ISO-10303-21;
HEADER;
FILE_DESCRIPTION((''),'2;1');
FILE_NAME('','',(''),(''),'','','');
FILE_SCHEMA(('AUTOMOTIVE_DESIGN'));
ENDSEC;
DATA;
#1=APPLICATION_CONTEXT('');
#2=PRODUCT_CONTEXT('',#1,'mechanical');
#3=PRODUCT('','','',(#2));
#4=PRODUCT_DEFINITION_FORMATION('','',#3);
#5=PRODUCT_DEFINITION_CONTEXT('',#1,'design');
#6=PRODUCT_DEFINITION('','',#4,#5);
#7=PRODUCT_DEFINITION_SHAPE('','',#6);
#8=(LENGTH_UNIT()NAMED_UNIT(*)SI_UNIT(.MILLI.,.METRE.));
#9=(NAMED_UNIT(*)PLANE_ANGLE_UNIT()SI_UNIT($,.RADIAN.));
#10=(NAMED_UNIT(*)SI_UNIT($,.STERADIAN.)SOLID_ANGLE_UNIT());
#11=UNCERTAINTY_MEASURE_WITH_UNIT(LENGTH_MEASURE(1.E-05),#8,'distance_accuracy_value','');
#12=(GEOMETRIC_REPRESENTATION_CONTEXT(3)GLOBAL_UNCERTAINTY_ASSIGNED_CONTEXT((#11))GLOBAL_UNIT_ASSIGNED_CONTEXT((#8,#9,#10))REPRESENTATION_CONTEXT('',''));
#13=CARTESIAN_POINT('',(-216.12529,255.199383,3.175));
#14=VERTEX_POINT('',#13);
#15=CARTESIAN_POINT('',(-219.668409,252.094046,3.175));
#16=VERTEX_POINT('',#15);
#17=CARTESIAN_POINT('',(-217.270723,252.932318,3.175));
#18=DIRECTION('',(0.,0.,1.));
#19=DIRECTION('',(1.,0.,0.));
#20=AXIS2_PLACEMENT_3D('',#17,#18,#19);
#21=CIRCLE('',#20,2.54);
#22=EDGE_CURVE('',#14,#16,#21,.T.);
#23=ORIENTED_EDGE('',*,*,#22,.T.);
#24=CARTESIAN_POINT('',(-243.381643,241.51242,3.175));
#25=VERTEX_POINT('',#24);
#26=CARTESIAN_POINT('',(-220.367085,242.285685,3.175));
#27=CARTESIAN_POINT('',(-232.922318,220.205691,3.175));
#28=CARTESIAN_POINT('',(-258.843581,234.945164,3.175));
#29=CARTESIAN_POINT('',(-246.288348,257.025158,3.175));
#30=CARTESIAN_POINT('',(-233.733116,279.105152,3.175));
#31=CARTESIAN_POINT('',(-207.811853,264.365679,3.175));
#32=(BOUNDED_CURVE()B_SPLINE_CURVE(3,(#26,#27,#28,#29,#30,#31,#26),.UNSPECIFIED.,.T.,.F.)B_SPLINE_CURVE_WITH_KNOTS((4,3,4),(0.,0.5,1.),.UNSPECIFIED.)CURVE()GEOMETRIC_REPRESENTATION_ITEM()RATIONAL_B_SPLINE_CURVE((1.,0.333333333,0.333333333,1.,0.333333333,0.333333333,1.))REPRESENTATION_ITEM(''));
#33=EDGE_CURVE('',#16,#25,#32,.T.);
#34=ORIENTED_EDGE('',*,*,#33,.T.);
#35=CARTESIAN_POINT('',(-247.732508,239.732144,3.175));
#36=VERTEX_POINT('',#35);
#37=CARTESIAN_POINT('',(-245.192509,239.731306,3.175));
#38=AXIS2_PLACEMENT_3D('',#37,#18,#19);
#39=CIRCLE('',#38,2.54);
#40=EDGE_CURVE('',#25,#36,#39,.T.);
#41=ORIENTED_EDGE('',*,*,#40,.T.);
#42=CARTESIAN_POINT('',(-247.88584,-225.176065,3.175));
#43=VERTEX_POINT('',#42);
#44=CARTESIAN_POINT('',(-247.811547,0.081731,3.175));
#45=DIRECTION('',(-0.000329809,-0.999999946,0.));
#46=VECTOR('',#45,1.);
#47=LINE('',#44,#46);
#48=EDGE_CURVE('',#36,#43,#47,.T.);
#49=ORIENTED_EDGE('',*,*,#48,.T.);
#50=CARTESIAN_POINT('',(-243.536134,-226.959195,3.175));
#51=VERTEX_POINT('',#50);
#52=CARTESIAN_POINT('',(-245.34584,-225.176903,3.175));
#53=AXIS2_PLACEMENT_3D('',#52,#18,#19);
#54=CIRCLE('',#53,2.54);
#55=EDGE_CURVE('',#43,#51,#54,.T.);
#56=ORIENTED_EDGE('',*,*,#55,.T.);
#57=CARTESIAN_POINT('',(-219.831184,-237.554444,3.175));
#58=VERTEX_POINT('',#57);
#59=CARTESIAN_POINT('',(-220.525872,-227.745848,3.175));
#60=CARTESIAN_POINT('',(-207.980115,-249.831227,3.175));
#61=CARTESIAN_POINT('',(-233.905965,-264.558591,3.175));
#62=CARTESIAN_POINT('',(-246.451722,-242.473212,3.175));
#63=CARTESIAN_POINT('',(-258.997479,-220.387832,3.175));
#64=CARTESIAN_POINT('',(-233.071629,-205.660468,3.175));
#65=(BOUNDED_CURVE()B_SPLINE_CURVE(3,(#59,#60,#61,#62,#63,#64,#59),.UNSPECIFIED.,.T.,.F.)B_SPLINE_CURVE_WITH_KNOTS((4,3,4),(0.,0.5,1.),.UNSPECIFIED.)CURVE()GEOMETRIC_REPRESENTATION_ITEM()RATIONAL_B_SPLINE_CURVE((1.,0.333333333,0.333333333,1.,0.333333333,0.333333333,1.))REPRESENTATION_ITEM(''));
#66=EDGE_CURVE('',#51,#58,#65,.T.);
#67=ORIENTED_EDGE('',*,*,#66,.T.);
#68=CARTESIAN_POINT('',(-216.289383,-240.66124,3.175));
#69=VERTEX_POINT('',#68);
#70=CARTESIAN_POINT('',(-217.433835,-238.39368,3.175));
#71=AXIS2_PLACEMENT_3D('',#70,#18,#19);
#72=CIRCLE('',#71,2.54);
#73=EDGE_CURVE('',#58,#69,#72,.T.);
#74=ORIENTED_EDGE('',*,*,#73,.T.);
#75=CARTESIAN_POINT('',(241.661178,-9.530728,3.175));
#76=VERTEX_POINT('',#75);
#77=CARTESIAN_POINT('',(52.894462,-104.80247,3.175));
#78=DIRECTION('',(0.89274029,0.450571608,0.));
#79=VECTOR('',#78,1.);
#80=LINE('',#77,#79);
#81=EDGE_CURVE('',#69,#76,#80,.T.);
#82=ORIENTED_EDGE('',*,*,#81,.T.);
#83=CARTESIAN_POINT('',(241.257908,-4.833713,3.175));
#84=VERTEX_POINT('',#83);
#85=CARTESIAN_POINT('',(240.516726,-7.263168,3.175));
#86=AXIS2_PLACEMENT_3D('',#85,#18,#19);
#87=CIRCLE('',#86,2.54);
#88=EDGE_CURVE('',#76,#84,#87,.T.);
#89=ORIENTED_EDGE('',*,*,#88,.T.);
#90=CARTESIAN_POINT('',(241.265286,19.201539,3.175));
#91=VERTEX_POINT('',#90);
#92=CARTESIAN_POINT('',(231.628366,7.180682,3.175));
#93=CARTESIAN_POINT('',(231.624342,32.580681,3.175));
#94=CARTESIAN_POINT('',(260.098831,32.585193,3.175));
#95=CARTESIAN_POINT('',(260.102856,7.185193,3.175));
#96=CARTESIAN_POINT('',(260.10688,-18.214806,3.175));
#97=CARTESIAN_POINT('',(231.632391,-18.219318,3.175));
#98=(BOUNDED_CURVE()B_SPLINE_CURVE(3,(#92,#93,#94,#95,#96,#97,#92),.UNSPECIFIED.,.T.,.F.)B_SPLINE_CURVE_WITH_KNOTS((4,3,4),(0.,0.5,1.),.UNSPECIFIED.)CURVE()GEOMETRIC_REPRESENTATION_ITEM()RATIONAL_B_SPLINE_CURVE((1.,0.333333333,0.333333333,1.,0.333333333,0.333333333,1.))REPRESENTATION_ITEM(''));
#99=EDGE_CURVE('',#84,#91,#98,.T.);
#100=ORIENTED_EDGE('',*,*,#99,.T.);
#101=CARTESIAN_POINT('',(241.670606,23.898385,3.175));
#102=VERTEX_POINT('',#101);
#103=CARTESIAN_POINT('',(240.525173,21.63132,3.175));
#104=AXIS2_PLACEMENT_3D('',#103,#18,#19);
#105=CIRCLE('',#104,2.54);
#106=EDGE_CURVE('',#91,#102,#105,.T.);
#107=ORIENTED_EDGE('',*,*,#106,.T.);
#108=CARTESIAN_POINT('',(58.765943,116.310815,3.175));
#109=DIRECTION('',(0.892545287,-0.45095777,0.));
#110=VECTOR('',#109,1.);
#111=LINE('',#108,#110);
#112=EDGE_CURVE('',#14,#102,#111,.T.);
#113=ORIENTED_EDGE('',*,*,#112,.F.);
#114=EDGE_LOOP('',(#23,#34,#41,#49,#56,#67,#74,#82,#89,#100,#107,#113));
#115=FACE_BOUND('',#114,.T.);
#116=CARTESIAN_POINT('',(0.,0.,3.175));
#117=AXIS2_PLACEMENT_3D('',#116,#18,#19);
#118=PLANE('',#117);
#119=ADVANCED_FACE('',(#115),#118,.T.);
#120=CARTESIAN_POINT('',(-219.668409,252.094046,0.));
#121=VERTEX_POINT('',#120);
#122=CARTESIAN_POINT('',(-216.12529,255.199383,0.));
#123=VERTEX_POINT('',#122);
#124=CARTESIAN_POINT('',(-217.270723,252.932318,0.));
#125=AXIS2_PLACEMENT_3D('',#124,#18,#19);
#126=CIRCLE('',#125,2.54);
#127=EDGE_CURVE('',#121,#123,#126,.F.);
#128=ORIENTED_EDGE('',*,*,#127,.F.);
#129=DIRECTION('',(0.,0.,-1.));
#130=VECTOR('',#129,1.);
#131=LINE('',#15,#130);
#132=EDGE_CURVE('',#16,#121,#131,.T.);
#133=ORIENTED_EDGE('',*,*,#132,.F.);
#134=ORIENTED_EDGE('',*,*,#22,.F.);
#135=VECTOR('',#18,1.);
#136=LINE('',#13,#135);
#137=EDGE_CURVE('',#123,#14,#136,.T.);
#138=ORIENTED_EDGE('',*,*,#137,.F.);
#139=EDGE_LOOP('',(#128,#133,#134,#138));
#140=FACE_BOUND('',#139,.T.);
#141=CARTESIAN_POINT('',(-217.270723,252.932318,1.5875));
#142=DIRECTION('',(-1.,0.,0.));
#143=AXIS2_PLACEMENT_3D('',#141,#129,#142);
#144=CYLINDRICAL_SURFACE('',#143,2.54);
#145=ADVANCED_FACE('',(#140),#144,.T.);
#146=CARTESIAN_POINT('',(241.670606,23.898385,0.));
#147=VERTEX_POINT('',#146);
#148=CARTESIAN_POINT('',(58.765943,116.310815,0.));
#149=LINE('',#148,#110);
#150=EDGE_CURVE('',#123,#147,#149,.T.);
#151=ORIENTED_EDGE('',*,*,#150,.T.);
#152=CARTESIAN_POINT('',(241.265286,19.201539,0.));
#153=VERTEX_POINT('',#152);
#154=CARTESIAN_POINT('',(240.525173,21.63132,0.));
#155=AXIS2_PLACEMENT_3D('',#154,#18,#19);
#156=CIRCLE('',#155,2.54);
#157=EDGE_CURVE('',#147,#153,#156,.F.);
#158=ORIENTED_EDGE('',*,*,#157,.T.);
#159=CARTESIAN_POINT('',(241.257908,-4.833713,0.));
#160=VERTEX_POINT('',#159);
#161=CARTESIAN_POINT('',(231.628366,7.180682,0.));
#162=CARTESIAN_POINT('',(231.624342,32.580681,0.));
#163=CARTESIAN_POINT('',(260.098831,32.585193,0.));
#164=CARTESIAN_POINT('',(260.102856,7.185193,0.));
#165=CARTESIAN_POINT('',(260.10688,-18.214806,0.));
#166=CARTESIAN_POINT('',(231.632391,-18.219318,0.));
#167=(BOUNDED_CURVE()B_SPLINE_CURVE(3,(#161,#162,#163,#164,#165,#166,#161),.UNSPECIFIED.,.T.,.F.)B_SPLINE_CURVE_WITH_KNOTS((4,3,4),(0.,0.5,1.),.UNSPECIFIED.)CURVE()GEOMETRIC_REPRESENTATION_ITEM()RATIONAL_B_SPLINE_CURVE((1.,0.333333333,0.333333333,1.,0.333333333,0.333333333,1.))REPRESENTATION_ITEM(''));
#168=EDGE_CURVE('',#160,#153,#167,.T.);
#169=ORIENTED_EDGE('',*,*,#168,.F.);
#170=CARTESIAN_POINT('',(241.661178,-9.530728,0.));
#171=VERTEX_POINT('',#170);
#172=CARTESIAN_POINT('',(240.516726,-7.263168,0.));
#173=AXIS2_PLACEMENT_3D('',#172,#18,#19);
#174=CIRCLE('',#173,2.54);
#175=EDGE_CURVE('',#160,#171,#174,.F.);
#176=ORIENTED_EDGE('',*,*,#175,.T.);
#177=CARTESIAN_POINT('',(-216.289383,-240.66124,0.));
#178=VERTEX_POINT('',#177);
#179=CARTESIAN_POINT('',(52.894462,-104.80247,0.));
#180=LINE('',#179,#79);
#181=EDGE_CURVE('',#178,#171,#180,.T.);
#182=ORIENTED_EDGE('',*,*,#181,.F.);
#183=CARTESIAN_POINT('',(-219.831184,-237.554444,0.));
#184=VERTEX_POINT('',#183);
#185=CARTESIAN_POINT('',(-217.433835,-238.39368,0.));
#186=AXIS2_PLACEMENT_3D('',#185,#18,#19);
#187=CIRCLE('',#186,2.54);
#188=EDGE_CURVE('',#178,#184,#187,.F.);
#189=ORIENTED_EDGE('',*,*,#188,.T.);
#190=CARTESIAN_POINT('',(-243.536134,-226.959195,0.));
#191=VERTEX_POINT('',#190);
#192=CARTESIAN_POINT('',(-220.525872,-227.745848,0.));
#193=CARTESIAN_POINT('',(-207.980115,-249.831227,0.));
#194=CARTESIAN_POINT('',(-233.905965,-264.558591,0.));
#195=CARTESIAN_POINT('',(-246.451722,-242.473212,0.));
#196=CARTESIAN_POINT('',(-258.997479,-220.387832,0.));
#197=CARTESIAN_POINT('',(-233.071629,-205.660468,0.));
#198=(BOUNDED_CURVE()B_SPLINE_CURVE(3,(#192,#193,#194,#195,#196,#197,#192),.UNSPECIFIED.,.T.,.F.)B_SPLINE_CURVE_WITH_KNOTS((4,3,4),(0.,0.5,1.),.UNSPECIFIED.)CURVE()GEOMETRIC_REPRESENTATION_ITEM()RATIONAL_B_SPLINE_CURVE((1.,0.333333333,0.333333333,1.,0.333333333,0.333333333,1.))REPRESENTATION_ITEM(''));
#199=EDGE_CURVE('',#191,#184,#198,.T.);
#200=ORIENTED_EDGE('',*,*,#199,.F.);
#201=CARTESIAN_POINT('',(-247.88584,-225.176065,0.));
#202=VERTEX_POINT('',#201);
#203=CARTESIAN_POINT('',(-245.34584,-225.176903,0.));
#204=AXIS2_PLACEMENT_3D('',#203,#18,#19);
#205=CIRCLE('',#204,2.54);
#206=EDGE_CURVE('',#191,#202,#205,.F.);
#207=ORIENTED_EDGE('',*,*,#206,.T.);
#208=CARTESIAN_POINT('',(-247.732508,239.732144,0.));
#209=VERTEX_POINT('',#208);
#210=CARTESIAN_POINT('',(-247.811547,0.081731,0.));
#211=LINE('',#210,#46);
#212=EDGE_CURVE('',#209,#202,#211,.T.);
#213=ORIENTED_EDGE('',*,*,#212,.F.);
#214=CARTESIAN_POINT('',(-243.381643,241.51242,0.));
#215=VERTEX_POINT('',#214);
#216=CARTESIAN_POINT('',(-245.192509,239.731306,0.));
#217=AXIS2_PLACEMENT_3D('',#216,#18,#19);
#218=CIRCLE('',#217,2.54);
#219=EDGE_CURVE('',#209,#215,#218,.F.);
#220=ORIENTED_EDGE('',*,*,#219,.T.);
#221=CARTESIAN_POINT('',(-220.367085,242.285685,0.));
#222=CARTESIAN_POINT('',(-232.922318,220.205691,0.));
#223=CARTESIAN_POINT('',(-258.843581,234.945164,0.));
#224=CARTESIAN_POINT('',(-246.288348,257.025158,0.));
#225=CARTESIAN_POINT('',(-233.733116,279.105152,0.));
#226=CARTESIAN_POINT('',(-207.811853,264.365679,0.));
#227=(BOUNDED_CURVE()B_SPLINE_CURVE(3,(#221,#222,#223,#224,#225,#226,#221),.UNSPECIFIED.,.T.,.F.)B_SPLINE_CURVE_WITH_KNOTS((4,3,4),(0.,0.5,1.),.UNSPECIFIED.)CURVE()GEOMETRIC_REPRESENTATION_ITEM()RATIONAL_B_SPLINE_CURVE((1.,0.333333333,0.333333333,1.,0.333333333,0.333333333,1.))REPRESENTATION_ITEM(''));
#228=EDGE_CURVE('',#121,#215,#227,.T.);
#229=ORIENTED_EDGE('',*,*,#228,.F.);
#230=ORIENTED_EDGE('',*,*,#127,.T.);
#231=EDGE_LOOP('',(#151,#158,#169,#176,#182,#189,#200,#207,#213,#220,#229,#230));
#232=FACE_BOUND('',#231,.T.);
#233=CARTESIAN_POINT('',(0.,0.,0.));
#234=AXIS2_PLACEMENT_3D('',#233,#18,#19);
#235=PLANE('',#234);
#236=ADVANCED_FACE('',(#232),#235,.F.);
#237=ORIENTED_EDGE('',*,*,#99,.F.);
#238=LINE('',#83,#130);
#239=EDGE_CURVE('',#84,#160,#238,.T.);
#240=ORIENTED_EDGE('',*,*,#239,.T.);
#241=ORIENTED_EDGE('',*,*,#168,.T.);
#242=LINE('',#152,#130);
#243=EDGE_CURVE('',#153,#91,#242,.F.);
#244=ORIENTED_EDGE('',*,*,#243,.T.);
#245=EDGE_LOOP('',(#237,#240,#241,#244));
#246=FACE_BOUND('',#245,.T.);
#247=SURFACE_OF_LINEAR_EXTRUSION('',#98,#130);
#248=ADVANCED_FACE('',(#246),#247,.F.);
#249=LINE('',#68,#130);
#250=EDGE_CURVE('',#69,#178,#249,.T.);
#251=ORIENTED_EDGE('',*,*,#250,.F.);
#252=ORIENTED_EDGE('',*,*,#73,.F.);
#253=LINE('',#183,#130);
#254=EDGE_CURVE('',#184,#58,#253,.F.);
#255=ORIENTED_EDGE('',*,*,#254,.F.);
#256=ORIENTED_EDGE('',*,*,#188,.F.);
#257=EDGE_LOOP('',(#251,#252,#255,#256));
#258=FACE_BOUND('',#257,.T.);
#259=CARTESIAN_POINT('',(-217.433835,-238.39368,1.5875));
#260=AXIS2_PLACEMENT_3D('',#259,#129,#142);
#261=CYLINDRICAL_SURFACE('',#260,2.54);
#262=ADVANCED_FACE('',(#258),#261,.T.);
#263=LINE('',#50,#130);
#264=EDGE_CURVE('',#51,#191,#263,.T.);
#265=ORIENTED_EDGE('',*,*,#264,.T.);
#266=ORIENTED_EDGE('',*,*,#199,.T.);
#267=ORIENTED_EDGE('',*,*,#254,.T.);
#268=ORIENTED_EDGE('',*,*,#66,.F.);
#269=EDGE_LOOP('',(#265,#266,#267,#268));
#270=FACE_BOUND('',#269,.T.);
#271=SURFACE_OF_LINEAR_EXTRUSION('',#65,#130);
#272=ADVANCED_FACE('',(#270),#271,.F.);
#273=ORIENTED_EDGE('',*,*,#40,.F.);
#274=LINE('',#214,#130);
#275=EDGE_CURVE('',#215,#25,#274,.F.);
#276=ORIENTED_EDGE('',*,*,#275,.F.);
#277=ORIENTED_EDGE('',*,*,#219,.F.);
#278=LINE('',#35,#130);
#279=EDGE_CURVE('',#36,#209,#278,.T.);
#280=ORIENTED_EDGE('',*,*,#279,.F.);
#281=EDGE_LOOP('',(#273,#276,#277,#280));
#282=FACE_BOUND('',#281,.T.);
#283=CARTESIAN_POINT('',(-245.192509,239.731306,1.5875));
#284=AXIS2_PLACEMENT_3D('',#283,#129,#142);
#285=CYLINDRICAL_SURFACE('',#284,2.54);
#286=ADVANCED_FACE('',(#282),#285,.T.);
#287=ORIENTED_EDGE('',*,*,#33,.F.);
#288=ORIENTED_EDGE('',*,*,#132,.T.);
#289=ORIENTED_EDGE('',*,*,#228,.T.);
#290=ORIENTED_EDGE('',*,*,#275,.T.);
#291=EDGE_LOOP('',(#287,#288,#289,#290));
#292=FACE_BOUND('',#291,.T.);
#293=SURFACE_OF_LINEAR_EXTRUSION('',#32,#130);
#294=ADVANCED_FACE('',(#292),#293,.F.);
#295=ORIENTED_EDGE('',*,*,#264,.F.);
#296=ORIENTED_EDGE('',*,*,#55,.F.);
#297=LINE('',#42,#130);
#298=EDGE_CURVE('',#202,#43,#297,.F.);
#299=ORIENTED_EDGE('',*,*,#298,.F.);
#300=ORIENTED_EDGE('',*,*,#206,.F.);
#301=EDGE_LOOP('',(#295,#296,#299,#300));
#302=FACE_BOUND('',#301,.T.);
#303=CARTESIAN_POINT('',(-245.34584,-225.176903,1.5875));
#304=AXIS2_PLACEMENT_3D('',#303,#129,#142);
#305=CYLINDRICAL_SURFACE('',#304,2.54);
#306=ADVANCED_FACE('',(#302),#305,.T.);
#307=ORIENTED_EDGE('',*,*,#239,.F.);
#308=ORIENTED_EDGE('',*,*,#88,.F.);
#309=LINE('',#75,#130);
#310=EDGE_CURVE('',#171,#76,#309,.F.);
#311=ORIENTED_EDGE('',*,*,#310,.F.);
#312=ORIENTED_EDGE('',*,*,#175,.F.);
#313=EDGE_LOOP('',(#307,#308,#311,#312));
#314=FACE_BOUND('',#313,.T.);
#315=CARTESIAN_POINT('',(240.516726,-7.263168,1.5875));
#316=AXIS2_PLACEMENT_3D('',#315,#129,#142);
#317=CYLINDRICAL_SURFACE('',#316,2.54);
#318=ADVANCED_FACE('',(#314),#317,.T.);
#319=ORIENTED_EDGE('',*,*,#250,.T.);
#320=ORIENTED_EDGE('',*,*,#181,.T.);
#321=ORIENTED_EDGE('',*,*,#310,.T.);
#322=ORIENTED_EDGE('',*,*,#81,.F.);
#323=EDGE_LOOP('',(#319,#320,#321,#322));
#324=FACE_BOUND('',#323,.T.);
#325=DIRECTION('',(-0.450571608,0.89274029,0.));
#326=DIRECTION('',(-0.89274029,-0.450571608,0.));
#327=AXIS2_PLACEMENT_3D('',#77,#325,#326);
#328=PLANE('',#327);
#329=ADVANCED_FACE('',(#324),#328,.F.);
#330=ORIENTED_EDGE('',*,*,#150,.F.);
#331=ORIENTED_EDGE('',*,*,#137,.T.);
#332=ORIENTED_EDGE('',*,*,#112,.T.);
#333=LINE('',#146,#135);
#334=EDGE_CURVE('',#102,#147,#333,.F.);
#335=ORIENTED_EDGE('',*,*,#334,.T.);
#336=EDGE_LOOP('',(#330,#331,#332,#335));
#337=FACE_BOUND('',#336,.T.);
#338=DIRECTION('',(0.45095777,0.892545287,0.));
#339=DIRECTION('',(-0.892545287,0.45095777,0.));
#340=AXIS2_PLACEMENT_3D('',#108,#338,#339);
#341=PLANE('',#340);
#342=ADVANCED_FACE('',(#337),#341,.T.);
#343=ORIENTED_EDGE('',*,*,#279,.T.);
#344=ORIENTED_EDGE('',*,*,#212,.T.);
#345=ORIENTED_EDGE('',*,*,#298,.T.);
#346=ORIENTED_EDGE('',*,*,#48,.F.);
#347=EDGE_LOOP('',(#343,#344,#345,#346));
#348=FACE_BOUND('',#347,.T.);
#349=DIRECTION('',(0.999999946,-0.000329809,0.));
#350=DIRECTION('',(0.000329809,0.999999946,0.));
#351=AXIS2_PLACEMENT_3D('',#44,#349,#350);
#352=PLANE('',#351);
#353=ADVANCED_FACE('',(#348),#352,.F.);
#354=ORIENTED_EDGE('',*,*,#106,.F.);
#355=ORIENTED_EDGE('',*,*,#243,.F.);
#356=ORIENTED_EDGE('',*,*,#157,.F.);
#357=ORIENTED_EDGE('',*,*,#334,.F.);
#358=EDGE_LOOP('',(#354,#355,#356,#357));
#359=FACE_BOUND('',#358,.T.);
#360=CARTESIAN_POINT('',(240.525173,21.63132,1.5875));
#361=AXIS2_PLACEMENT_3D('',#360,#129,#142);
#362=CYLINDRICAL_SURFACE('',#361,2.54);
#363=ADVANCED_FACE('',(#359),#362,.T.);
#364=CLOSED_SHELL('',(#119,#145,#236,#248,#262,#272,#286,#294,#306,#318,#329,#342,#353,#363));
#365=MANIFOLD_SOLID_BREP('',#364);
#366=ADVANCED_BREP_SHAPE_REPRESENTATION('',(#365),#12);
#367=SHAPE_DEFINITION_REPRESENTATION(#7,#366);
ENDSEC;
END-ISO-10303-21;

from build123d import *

# Parameters (mm, degrees)
BOSS_EXTRUDE1_DEPTH = 3.175
FILLET1_START       = -1
FILLET1_DEPTH       = 5


with BuildPart() as part:
    # Sketch2 → Boss-Extrude1 (new body)
    with BuildSketch(Plane.XY):
        with BuildLine():
            Line((252.882647522, 18.233509916), (-227.808389099, 261.102259727))
            add(Edge.make_bspline(
                [(-227.808389099, 261.102259727), (-218.508408171, 256.403452033), (-217.090340448, 248.048262702), (-220.367085383, 242.285684549)],
                knots=[0.742781474, 0.742781474, 0.742781474, 0.742781474, 1, 1, 1, 1], degree=3, weights=[0.500416857, 0.490514251, 0.657041966, 1]))
            add(Edge.make_bspline(
                [(-220.367085383, 242.285684549), (-227.805809429, 229.203729887), (-247.735230176, 231.479633917), (-247.728634027, 251.479512649)],
                knots=[0, 0, 0, 0, 0.406744285, 0.406744285, 0.406744285, 0.406744285], degree=3, weights=[1, 0.457674286, 0.356524342, 0.696550168]))
            Line((-247.728634027, 251.479512649), (-247.88971408, -236.923885776))
            add(Edge.make_bspline(
                [(-247.88971408, -236.923885776), (-247.883118871, -216.926855588), (-227.957336221, -214.663599199), (-220.525871765, -227.745847533)],
                knots=[0.593296933, 0.593296933, 0.593296933, 0.593296933, 1, 1, 1, 1], degree=3, weights=[0.696446809, 0.356544847, 0.457729245, 1]))
            add(Edge.make_bspline(
                [(-220.525871765, -227.745847533), (-217.251599097, -233.509832332), (-218.672940969, -241.864237022), (-227.974334939, -246.55870873)],
                knots=[0, 0, 0, 0, 0.25721856, 0.25721856, 0.25721856, 0.25721856], degree=3, weights=[1, 0.65704192, 0.490514207, 0.500416861]))
            Line((-227.974334939, -246.55870873), (252.876255857, -3.870408269))
            add(Edge.make_bspline(
                [(252.876255857, -3.870408269), (240.565044662, -10.083953555), (231.629829811, -2.056184754), (231.628366282, 7.18068181)],
                knots=[0.684200569, 0.684200569, 0.684200569, 0.684200569, 1, 1, 1, 1], degree=3, weights=[0.534636521, 0.423812933, 0.578934092, 1]))
            add(Edge.make_bspline(
                [(231.628366282, 7.18068181), (231.626901898, 16.422942754), (240.567824747, 24.455563967), (252.882647522, 18.233509916)],
                knots=[0, 0, 0, 0, 0.315906176, 0.315906176, 0.315906176, 0.315906176], degree=3, weights=[1, 0.578791765, 0.423708096, 0.534748993]))
        make_face()
    extrude(amount=BOSS_EXTRUDE1_DEPTH)

    # Fillet1: read off the stored shape, not the designer's step
    # Fillet1 outline → Fillet1 (cut)
    with BuildSketch(Plane.XY.offset(FILLET1_START)):
        with BuildLine():
            Line((-247.728634027, 251.479512649), (-247.73250842, 239.732143832))
            ThreePointArc((-247.73250842, 239.732143832), (-246.154410329, 242.082124056), (-243.381643145, 241.512419941))
            add(Edge.make_bspline(
                [(-243.381643145, 241.512419941), (-246.348546976, 244.528882707), (-247.729754583, 248.081924898), (-247.728634027, 251.479512649)],
                knots=[1.290568731, 1.290568731, 1.290568731, 1.290568731, 1.406744285, 1.406744285, 1.406744285, 1.406744285], degree=3, weights=[0.513166576, 0.538303082, 0.599430946, 0.696550168]))
        make_face()
        with BuildLine():
            ThreePointArc((-243.536134042, -226.959195307), (-246.309281681, -227.52709022), (-247.885839538, -225.176065383))
            Line((-247.885839538, -225.176065383), (-247.88971408, -236.923885776))
            add(Edge.make_bspline(
                [(-247.88971408, -236.923885776), (-247.888593429, -233.526010078), (-246.504981138, -229.973706223), (-243.536134042, -226.959195307)],
                knots=[0.593296933, 0.593296933, 0.593296933, 0.593296933, 0.709466339, 0.709466339, 0.709466339, 0.709466339], degree=3, weights=[0.696446809, 0.599358264, 0.538257269, 0.513143822]))
        make_face()
        with BuildLine():
            add(Edge.make_bspline(
                [(-227.808389099, 261.102259727), (-223.785212041, 259.069552836), (-220.970894654, 255.819508956), (-219.668408897, 252.094046153)],
                knots=[0.742781474, 0.742781474, 0.742781474, 0.742781474, 0.855317926, 0.855317926, 0.855317926, 0.855317926], degree=3, weights=[0.500416857, 0.496084338, 0.525523694, 0.588734925]))
            ThreePointArc((-219.668408897, 252.094046153), (-218.944883502, 254.842497831), (-216.125289867, 255.199383475))
            Line((-216.125289867, 255.199383475), (-227.808389099, 261.102259727))
        make_face()
        with BuildLine():
            ThreePointArc((-216.289382855, -240.661240335), (-219.108792384, -240.303160787), (-219.831184056, -237.554444482))
            add(Edge.make_bspline(
                [(-219.831184056, -237.554444482), (-221.135109685, -241.279221567), (-223.950577298, -244.527893084), (-227.974334939, -246.55870873)],
                knots=[1.144682938, 1.144682938, 1.144682938, 1.144682938, 1.25721856, 1.25721856, 1.25721856, 1.25721856], degree=3, weights=[0.588733468, 0.525523222, 0.496084353, 0.500416861]))
            Line((-227.974334939, -246.55870873), (-216.289382855, -240.661240335))
        make_face()
        with BuildLine():
            Line((252.882647522, 18.233509916), (241.670605569, 23.898384866))
            ThreePointArc((241.670605569, 23.898384866), (243.055767599, 21.412939134), (241.265285671, 19.201539396))
            add(Edge.make_bspline(
                [(241.265285671, 19.201539396), (245.20247003, 20.400808532), (249.313639066, 20.036748495), (252.882647522, 18.233509916)],
                knots=[1.208515124, 1.208515124, 1.208515124, 1.208515124, 1.315906176, 1.315906176, 1.315906176, 1.315906176], degree=3, weights=[0.513767959, 0.490007402, 0.49700108, 0.534748993]))
        make_face()
        with BuildLine():
            ThreePointArc((241.25790796, -4.833713175), (243.047416072, -7.045891114), (241.661178159, -9.530728124))
            Line((241.661178159, -9.530728124), (252.876255857, -3.870408269))
            add(Edge.make_bspline(
                [(252.876255857, -3.870408269), (249.305839521, -5.672419724), (245.194273266, -6.034625453), (241.25790796, -4.833713175)],
                knots=[0.684200569, 0.684200569, 0.684200569, 0.684200569, 0.791591528, 0.791591528, 0.791591528, 0.791591528], degree=3, weights=[0.534636521, 0.49694978, 0.49001722, 0.513838842]))
        make_face()
    extrude(amount=FILLET1_DEPTH, mode=Mode.SUBTRACT)


solid = part.part
